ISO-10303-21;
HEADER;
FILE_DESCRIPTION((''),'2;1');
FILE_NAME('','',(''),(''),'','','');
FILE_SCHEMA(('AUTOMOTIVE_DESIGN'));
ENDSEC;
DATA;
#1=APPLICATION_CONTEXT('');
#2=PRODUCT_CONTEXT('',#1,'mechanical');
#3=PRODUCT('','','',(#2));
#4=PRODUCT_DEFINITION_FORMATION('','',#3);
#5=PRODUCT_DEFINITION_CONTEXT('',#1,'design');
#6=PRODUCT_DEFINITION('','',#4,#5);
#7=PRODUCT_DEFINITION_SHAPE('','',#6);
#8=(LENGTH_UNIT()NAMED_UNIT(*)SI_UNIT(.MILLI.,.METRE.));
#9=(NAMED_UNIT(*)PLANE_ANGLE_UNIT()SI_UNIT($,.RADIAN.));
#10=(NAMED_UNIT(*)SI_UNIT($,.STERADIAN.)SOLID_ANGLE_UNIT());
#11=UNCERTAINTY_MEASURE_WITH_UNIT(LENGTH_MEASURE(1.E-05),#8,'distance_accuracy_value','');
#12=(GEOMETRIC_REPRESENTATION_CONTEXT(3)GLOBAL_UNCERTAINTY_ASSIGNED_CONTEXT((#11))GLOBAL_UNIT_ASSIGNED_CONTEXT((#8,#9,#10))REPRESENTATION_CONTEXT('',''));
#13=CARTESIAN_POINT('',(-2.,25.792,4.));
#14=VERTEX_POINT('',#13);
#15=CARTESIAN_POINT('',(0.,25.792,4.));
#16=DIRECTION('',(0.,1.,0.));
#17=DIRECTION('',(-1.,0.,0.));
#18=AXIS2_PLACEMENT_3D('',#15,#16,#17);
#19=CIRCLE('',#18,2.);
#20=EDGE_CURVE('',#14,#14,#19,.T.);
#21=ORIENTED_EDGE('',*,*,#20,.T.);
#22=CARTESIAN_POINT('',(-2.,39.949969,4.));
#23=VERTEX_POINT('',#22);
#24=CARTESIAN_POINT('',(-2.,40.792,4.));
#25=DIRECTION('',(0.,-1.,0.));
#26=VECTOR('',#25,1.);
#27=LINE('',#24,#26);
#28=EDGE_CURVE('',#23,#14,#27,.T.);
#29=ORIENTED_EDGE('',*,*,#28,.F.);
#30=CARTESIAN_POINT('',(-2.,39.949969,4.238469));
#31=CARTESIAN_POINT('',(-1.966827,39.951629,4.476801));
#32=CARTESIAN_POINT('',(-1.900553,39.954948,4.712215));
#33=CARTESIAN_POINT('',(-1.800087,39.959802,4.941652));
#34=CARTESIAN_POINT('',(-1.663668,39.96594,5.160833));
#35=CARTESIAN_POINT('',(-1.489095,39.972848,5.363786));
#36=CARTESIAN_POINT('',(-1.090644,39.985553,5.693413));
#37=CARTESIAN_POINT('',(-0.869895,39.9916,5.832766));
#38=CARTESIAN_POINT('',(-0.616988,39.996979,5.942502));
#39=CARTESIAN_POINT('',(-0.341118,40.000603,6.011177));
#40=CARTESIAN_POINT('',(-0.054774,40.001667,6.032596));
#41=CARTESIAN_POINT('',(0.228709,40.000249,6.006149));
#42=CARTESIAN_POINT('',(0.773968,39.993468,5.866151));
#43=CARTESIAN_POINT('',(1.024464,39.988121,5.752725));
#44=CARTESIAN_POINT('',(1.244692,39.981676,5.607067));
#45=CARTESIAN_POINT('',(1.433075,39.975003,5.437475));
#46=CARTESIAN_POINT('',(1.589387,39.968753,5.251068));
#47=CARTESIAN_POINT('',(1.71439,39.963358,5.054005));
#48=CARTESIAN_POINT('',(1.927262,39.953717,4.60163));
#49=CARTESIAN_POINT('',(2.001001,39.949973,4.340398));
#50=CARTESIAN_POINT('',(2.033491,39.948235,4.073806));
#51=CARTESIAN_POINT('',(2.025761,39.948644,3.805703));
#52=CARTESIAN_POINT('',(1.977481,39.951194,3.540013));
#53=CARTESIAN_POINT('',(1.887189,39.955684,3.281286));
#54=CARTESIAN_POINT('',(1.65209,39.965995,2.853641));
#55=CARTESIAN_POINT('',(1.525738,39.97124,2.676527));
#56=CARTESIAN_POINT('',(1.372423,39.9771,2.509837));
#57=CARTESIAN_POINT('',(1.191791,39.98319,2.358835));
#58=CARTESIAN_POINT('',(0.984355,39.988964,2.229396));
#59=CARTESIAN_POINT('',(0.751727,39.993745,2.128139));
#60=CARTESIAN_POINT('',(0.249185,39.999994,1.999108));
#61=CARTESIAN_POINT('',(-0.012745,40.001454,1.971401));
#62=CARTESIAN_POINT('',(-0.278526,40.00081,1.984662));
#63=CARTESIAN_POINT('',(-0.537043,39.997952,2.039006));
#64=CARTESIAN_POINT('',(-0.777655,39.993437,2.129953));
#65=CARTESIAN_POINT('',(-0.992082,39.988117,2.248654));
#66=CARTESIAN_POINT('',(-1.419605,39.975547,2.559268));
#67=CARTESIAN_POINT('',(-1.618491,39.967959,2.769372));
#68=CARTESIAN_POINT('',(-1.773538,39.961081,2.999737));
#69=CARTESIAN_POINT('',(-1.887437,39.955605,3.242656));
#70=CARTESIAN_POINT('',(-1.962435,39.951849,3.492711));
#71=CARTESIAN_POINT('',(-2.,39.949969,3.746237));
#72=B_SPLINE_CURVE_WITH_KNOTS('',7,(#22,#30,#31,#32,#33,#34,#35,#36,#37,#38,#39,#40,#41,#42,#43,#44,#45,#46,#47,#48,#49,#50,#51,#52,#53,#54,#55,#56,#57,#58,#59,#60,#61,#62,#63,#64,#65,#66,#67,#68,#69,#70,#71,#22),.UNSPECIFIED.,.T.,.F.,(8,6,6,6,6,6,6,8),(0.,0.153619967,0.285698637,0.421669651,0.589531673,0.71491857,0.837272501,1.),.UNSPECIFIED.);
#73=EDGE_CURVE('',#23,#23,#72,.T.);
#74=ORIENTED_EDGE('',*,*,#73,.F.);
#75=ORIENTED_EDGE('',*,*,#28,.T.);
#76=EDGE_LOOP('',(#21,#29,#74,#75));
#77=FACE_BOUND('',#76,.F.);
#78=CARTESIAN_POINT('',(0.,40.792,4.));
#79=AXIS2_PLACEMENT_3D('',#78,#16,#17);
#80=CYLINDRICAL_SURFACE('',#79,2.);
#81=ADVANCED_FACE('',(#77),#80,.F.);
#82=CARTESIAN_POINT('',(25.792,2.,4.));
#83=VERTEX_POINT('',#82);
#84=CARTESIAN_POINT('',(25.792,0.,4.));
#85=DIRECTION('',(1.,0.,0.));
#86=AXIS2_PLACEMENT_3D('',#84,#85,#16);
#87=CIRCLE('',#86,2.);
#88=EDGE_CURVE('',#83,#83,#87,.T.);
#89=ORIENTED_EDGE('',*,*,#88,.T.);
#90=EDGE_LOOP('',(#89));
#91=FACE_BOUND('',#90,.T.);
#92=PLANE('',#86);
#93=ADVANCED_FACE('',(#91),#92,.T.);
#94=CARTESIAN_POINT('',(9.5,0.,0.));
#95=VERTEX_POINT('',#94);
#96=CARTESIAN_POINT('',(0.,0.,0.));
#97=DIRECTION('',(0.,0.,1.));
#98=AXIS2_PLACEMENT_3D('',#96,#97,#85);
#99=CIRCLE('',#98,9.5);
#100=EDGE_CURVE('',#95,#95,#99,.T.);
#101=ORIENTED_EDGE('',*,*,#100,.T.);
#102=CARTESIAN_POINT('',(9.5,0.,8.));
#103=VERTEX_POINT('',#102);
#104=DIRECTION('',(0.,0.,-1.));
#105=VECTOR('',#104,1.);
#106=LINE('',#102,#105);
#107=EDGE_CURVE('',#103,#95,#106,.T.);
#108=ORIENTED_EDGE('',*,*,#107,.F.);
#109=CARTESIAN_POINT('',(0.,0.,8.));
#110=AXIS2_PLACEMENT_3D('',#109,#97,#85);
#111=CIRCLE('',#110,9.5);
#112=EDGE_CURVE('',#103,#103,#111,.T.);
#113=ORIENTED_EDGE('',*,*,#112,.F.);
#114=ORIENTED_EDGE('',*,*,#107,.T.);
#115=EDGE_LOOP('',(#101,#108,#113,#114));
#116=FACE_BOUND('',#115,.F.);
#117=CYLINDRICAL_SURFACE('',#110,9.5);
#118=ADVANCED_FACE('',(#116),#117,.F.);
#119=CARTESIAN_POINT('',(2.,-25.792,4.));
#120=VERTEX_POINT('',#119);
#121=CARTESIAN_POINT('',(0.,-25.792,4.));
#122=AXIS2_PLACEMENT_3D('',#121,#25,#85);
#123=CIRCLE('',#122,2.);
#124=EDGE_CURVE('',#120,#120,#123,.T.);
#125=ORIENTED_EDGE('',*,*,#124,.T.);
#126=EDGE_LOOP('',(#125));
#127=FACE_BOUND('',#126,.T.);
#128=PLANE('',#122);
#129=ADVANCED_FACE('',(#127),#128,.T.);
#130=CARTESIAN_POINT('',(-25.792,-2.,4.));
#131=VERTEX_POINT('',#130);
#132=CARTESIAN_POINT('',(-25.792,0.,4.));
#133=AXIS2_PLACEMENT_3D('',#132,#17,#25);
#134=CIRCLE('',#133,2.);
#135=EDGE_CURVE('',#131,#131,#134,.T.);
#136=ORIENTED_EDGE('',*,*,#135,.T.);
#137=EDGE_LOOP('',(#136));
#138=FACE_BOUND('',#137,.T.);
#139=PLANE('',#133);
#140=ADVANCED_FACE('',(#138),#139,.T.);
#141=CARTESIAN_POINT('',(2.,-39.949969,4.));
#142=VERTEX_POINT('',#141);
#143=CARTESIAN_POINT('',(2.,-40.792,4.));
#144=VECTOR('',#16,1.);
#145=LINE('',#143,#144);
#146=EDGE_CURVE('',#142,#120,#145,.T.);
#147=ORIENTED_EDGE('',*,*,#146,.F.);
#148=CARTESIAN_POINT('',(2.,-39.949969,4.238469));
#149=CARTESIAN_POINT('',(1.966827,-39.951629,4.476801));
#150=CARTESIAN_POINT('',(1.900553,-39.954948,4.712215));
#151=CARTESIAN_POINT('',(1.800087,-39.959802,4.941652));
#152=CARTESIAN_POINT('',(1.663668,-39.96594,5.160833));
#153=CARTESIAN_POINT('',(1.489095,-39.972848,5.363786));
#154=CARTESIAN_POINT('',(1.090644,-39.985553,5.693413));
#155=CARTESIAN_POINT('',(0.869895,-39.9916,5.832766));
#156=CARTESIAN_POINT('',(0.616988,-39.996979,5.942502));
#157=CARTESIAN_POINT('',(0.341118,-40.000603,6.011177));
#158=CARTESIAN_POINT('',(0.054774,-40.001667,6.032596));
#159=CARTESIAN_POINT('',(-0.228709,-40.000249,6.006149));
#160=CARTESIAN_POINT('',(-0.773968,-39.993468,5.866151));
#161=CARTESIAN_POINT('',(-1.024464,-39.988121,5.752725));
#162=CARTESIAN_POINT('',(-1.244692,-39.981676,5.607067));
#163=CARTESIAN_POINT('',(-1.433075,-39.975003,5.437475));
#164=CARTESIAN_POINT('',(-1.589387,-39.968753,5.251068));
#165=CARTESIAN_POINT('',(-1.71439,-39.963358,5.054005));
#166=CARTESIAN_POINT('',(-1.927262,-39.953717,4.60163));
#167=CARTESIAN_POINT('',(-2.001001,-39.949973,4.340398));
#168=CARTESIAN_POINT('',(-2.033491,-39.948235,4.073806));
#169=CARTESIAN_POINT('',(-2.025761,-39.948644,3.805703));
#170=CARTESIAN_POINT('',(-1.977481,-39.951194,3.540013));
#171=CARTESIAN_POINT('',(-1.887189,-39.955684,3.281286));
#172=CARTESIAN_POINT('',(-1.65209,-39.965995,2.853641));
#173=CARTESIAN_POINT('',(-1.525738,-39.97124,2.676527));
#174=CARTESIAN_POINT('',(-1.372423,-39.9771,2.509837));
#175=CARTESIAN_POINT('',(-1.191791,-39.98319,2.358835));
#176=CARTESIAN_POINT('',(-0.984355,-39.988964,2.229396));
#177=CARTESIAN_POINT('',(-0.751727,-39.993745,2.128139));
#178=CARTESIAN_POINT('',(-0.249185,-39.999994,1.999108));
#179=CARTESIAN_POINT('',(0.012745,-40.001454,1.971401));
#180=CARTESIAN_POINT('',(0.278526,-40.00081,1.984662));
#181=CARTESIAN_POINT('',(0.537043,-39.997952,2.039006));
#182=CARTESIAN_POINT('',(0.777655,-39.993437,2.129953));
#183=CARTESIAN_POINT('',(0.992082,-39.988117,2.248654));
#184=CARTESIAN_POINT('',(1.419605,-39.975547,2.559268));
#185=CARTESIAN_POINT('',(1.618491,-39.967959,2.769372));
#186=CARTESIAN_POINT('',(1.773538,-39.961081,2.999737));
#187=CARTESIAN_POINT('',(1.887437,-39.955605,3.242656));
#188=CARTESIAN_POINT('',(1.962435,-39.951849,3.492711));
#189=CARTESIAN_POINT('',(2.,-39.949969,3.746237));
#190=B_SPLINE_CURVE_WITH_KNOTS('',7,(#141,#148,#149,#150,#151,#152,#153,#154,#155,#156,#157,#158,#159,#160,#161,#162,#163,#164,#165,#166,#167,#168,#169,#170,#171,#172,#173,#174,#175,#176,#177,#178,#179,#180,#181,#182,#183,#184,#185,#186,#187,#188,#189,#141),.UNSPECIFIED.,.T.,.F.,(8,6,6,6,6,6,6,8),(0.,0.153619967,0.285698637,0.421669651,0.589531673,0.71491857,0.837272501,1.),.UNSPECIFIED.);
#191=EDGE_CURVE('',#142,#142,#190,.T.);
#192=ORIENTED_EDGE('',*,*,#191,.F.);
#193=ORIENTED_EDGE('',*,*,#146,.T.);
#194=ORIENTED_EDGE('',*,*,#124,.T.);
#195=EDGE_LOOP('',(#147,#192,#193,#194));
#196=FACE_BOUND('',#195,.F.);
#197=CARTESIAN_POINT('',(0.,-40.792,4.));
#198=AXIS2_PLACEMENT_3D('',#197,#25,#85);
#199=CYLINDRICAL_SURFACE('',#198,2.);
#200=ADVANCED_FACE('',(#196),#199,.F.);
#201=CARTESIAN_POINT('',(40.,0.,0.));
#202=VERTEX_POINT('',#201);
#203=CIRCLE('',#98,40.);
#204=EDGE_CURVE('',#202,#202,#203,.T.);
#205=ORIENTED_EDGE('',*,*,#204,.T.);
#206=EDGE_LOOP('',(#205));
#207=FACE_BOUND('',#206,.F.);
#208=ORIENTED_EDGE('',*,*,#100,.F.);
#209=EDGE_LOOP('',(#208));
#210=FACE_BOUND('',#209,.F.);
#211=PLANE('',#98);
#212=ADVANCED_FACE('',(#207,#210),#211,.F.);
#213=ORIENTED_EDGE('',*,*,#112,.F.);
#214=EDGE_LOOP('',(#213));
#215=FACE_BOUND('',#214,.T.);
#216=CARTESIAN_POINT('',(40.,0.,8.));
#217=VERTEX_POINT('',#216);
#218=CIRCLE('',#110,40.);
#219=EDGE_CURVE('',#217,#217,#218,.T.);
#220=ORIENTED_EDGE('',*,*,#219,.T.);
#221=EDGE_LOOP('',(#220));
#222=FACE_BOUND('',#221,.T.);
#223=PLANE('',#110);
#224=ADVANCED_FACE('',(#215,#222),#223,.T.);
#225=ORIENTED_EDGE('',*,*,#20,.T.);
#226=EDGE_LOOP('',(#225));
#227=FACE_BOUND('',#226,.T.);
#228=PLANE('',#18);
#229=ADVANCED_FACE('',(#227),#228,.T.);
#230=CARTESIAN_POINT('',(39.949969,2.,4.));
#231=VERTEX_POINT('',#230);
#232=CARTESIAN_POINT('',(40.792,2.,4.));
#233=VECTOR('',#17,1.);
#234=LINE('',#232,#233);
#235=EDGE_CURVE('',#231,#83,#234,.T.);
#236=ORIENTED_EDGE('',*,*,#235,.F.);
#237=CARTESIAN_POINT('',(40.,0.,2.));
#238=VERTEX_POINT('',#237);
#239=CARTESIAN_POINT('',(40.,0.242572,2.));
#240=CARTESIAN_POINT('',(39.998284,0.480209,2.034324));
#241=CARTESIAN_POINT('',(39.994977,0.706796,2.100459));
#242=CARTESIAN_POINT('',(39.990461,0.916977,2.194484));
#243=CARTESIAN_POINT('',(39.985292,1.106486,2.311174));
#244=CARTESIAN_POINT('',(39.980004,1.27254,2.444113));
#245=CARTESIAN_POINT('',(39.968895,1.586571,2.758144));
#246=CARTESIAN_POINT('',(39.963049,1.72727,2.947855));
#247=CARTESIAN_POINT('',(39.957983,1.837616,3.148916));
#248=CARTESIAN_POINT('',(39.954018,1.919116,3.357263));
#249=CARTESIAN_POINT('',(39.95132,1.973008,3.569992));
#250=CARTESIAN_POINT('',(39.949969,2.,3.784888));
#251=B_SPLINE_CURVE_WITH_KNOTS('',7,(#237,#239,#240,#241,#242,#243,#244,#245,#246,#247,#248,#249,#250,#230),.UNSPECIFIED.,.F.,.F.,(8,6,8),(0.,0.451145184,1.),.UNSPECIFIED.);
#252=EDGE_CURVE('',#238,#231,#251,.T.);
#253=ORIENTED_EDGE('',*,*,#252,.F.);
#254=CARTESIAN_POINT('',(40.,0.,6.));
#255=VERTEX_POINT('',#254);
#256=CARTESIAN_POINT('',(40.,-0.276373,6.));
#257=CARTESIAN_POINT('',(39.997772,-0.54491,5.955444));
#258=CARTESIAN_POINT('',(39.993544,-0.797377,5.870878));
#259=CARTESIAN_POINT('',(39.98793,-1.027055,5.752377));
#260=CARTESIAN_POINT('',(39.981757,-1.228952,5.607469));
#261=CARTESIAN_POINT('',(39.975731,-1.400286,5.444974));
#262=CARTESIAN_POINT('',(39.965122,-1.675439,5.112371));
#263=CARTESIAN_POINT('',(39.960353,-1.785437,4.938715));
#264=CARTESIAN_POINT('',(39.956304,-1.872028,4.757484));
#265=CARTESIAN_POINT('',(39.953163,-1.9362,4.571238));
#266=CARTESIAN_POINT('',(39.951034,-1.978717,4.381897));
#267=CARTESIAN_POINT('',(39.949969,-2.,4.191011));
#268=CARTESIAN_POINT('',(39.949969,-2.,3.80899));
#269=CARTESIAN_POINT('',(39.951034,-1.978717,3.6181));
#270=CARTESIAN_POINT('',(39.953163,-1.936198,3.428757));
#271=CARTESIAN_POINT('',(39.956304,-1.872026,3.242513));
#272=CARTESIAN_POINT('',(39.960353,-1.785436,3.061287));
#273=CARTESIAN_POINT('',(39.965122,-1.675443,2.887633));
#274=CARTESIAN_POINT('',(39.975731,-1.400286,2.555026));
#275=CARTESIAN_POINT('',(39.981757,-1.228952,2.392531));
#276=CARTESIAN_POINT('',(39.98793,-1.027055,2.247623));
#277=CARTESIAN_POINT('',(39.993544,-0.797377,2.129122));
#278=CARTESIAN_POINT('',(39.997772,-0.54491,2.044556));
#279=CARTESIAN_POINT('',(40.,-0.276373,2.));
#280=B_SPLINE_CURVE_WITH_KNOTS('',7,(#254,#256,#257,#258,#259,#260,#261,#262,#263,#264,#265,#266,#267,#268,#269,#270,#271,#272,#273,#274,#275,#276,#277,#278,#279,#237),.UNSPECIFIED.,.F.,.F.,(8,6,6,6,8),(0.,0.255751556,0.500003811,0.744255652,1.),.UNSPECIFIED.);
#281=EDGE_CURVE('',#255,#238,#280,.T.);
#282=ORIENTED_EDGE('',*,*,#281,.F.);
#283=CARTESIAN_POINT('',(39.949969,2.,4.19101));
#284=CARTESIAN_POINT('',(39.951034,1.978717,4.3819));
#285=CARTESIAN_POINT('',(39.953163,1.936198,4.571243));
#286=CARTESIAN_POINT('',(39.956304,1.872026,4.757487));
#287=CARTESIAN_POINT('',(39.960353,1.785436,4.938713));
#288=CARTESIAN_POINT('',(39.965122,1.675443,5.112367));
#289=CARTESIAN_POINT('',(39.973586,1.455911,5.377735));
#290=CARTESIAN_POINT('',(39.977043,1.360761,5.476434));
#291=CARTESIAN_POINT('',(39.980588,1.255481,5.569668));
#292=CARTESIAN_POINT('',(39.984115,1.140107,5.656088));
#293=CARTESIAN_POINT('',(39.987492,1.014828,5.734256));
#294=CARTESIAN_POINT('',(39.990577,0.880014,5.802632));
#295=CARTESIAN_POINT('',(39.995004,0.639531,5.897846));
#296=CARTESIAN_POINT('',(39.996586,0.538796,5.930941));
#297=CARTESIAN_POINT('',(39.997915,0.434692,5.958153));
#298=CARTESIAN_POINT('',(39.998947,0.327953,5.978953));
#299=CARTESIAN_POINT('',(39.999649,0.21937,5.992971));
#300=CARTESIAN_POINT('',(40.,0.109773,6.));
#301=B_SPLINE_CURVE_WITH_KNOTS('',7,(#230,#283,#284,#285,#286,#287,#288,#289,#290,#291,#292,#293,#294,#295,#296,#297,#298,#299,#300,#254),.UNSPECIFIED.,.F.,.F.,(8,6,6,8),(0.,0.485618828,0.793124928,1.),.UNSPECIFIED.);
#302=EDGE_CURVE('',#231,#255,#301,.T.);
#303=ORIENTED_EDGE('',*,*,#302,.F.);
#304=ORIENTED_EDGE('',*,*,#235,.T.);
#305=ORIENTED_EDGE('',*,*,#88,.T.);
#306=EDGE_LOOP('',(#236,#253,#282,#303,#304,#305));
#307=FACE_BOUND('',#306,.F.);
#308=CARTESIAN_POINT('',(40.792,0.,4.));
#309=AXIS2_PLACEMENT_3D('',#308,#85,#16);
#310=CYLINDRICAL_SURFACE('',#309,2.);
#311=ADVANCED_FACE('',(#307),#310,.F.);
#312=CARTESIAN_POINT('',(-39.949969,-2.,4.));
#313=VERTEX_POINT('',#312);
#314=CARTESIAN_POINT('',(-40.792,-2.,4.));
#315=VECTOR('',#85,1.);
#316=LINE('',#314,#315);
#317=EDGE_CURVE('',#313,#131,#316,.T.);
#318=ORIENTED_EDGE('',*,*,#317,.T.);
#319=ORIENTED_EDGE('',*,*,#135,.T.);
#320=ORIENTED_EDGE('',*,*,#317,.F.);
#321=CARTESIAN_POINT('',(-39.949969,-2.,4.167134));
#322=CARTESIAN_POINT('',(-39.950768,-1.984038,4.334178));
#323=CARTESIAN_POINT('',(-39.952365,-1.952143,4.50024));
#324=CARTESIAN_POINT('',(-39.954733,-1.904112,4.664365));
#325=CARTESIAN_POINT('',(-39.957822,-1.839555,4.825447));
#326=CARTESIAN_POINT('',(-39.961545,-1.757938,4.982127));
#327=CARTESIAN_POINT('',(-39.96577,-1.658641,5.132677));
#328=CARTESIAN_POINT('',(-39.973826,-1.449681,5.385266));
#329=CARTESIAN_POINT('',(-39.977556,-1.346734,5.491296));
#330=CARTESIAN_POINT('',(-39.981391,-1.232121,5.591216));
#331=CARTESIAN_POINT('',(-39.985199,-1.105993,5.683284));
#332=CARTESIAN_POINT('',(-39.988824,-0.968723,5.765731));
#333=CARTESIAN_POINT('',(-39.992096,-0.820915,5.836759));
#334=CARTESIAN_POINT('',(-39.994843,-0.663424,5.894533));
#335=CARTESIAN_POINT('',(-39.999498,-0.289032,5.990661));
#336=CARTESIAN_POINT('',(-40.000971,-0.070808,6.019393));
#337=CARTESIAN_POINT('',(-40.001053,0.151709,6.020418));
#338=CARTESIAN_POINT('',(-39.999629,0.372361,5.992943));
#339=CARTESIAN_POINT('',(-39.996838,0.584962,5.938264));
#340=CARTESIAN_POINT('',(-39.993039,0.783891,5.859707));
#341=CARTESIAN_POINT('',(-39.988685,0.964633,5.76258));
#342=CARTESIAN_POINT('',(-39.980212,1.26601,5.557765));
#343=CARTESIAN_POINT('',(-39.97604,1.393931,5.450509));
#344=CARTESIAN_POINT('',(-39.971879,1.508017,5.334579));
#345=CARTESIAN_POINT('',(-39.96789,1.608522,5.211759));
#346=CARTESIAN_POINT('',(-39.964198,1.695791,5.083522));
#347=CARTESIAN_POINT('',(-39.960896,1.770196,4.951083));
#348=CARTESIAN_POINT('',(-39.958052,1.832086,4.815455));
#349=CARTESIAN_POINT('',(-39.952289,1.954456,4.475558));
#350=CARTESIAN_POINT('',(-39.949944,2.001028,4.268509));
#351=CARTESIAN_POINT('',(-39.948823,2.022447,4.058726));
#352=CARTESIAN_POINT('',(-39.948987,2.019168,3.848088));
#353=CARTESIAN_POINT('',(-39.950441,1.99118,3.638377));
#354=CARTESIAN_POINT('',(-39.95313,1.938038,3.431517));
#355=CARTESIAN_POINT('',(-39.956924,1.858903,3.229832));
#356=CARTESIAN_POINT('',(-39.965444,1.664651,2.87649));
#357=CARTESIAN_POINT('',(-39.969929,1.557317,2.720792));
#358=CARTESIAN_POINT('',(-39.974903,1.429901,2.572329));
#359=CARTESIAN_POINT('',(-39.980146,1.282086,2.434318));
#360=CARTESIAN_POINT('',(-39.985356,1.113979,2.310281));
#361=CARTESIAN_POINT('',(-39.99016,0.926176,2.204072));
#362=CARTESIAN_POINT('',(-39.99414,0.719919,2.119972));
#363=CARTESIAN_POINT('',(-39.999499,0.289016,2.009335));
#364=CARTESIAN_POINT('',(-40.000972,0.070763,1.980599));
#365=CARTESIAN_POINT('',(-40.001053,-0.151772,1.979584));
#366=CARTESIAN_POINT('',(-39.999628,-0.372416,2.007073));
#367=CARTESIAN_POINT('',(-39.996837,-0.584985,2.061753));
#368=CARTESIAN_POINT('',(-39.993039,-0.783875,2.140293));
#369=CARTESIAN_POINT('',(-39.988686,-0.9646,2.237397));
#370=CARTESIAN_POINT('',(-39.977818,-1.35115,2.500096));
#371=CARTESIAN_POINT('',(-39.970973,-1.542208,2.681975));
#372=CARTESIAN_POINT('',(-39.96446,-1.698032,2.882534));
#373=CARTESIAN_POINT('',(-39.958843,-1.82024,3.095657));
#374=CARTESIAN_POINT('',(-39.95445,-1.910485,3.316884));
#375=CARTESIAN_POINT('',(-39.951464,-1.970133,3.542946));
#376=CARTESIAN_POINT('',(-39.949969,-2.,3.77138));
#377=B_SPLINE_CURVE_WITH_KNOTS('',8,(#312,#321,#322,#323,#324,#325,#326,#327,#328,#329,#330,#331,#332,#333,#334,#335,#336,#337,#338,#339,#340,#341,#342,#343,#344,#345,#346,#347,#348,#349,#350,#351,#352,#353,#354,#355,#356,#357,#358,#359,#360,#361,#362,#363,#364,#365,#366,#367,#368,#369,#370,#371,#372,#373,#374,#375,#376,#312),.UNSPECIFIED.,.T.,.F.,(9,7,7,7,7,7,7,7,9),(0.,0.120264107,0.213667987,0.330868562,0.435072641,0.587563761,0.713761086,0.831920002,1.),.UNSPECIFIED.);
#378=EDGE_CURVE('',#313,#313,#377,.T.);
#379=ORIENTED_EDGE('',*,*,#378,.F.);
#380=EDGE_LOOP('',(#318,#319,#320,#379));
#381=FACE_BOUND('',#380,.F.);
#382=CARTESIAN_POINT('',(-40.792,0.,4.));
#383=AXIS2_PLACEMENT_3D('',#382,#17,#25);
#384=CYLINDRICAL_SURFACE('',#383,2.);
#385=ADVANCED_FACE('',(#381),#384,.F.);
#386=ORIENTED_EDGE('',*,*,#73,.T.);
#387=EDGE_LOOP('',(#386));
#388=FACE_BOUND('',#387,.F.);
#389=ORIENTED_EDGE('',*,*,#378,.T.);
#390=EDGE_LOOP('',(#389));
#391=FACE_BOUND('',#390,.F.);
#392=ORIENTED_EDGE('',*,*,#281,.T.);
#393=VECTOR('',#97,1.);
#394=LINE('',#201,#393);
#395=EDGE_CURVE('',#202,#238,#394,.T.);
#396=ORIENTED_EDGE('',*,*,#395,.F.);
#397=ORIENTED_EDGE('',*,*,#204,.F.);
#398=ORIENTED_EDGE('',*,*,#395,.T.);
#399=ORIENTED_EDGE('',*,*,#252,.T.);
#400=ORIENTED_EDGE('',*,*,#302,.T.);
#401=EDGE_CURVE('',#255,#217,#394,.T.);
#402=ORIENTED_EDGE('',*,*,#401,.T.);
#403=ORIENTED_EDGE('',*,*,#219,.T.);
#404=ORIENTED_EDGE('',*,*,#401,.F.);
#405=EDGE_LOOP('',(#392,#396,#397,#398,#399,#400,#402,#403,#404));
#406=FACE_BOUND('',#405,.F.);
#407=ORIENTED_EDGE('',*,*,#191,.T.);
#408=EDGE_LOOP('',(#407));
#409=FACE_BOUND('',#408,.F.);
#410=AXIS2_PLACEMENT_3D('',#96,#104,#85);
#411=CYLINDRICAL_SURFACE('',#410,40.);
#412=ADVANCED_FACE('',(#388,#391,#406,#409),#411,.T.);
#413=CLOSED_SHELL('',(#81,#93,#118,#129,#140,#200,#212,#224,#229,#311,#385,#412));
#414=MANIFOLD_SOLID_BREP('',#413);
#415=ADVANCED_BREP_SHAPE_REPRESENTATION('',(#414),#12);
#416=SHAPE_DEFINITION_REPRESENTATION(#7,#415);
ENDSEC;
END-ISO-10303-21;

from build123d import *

# Parameters (mm, degrees)
F0_R            = 40
F1_DEPTH        = 8
F2_R            = 9.5
F3_DEPTH        = 8.001
F6_R            = 2
F7_DEPTH        = 15
F7_COPIES_COUNT = 4


# Not quite as in the source:
# - a pattern or mirror of a feature is missing from the dataset's text; its kind, count and spacing are read off the source's solid


with BuildPart() as f1:
    # F0 (on Top) → F1 (new body)
    with BuildSketch(Plane.XY):
        Circle(F0_R)
    extrude(amount=F1_DEPTH)

    # F2 (on face) → F3 (cut, through all)
    with BuildSketch(Plane.XY.offset(8)):
        Circle(F2_R)
    extrude(amount=-F3_DEPTH, mode=Mode.SUBTRACT)

    # F6 (on offset) → F7 (cut)
    with BuildSketch(Plane.XZ.offset(40.792)):
        with Locations((0, 4)):
            Circle(F6_R)
    f7 = extrude(amount=-F7_DEPTH, mode=Mode.SUBTRACT)

    # F7_copies: F7 ×4 about axis
    f7_copies_axis = Axis((0, 0, 0), (0, 0, 1))
    for i in range(1, F7_COPIES_COUNT):
        add(f7.rotate(f7_copies_axis, i * 360 / F7_COPIES_COUNT), mode=Mode.SUBTRACT)


solid = f1.part
